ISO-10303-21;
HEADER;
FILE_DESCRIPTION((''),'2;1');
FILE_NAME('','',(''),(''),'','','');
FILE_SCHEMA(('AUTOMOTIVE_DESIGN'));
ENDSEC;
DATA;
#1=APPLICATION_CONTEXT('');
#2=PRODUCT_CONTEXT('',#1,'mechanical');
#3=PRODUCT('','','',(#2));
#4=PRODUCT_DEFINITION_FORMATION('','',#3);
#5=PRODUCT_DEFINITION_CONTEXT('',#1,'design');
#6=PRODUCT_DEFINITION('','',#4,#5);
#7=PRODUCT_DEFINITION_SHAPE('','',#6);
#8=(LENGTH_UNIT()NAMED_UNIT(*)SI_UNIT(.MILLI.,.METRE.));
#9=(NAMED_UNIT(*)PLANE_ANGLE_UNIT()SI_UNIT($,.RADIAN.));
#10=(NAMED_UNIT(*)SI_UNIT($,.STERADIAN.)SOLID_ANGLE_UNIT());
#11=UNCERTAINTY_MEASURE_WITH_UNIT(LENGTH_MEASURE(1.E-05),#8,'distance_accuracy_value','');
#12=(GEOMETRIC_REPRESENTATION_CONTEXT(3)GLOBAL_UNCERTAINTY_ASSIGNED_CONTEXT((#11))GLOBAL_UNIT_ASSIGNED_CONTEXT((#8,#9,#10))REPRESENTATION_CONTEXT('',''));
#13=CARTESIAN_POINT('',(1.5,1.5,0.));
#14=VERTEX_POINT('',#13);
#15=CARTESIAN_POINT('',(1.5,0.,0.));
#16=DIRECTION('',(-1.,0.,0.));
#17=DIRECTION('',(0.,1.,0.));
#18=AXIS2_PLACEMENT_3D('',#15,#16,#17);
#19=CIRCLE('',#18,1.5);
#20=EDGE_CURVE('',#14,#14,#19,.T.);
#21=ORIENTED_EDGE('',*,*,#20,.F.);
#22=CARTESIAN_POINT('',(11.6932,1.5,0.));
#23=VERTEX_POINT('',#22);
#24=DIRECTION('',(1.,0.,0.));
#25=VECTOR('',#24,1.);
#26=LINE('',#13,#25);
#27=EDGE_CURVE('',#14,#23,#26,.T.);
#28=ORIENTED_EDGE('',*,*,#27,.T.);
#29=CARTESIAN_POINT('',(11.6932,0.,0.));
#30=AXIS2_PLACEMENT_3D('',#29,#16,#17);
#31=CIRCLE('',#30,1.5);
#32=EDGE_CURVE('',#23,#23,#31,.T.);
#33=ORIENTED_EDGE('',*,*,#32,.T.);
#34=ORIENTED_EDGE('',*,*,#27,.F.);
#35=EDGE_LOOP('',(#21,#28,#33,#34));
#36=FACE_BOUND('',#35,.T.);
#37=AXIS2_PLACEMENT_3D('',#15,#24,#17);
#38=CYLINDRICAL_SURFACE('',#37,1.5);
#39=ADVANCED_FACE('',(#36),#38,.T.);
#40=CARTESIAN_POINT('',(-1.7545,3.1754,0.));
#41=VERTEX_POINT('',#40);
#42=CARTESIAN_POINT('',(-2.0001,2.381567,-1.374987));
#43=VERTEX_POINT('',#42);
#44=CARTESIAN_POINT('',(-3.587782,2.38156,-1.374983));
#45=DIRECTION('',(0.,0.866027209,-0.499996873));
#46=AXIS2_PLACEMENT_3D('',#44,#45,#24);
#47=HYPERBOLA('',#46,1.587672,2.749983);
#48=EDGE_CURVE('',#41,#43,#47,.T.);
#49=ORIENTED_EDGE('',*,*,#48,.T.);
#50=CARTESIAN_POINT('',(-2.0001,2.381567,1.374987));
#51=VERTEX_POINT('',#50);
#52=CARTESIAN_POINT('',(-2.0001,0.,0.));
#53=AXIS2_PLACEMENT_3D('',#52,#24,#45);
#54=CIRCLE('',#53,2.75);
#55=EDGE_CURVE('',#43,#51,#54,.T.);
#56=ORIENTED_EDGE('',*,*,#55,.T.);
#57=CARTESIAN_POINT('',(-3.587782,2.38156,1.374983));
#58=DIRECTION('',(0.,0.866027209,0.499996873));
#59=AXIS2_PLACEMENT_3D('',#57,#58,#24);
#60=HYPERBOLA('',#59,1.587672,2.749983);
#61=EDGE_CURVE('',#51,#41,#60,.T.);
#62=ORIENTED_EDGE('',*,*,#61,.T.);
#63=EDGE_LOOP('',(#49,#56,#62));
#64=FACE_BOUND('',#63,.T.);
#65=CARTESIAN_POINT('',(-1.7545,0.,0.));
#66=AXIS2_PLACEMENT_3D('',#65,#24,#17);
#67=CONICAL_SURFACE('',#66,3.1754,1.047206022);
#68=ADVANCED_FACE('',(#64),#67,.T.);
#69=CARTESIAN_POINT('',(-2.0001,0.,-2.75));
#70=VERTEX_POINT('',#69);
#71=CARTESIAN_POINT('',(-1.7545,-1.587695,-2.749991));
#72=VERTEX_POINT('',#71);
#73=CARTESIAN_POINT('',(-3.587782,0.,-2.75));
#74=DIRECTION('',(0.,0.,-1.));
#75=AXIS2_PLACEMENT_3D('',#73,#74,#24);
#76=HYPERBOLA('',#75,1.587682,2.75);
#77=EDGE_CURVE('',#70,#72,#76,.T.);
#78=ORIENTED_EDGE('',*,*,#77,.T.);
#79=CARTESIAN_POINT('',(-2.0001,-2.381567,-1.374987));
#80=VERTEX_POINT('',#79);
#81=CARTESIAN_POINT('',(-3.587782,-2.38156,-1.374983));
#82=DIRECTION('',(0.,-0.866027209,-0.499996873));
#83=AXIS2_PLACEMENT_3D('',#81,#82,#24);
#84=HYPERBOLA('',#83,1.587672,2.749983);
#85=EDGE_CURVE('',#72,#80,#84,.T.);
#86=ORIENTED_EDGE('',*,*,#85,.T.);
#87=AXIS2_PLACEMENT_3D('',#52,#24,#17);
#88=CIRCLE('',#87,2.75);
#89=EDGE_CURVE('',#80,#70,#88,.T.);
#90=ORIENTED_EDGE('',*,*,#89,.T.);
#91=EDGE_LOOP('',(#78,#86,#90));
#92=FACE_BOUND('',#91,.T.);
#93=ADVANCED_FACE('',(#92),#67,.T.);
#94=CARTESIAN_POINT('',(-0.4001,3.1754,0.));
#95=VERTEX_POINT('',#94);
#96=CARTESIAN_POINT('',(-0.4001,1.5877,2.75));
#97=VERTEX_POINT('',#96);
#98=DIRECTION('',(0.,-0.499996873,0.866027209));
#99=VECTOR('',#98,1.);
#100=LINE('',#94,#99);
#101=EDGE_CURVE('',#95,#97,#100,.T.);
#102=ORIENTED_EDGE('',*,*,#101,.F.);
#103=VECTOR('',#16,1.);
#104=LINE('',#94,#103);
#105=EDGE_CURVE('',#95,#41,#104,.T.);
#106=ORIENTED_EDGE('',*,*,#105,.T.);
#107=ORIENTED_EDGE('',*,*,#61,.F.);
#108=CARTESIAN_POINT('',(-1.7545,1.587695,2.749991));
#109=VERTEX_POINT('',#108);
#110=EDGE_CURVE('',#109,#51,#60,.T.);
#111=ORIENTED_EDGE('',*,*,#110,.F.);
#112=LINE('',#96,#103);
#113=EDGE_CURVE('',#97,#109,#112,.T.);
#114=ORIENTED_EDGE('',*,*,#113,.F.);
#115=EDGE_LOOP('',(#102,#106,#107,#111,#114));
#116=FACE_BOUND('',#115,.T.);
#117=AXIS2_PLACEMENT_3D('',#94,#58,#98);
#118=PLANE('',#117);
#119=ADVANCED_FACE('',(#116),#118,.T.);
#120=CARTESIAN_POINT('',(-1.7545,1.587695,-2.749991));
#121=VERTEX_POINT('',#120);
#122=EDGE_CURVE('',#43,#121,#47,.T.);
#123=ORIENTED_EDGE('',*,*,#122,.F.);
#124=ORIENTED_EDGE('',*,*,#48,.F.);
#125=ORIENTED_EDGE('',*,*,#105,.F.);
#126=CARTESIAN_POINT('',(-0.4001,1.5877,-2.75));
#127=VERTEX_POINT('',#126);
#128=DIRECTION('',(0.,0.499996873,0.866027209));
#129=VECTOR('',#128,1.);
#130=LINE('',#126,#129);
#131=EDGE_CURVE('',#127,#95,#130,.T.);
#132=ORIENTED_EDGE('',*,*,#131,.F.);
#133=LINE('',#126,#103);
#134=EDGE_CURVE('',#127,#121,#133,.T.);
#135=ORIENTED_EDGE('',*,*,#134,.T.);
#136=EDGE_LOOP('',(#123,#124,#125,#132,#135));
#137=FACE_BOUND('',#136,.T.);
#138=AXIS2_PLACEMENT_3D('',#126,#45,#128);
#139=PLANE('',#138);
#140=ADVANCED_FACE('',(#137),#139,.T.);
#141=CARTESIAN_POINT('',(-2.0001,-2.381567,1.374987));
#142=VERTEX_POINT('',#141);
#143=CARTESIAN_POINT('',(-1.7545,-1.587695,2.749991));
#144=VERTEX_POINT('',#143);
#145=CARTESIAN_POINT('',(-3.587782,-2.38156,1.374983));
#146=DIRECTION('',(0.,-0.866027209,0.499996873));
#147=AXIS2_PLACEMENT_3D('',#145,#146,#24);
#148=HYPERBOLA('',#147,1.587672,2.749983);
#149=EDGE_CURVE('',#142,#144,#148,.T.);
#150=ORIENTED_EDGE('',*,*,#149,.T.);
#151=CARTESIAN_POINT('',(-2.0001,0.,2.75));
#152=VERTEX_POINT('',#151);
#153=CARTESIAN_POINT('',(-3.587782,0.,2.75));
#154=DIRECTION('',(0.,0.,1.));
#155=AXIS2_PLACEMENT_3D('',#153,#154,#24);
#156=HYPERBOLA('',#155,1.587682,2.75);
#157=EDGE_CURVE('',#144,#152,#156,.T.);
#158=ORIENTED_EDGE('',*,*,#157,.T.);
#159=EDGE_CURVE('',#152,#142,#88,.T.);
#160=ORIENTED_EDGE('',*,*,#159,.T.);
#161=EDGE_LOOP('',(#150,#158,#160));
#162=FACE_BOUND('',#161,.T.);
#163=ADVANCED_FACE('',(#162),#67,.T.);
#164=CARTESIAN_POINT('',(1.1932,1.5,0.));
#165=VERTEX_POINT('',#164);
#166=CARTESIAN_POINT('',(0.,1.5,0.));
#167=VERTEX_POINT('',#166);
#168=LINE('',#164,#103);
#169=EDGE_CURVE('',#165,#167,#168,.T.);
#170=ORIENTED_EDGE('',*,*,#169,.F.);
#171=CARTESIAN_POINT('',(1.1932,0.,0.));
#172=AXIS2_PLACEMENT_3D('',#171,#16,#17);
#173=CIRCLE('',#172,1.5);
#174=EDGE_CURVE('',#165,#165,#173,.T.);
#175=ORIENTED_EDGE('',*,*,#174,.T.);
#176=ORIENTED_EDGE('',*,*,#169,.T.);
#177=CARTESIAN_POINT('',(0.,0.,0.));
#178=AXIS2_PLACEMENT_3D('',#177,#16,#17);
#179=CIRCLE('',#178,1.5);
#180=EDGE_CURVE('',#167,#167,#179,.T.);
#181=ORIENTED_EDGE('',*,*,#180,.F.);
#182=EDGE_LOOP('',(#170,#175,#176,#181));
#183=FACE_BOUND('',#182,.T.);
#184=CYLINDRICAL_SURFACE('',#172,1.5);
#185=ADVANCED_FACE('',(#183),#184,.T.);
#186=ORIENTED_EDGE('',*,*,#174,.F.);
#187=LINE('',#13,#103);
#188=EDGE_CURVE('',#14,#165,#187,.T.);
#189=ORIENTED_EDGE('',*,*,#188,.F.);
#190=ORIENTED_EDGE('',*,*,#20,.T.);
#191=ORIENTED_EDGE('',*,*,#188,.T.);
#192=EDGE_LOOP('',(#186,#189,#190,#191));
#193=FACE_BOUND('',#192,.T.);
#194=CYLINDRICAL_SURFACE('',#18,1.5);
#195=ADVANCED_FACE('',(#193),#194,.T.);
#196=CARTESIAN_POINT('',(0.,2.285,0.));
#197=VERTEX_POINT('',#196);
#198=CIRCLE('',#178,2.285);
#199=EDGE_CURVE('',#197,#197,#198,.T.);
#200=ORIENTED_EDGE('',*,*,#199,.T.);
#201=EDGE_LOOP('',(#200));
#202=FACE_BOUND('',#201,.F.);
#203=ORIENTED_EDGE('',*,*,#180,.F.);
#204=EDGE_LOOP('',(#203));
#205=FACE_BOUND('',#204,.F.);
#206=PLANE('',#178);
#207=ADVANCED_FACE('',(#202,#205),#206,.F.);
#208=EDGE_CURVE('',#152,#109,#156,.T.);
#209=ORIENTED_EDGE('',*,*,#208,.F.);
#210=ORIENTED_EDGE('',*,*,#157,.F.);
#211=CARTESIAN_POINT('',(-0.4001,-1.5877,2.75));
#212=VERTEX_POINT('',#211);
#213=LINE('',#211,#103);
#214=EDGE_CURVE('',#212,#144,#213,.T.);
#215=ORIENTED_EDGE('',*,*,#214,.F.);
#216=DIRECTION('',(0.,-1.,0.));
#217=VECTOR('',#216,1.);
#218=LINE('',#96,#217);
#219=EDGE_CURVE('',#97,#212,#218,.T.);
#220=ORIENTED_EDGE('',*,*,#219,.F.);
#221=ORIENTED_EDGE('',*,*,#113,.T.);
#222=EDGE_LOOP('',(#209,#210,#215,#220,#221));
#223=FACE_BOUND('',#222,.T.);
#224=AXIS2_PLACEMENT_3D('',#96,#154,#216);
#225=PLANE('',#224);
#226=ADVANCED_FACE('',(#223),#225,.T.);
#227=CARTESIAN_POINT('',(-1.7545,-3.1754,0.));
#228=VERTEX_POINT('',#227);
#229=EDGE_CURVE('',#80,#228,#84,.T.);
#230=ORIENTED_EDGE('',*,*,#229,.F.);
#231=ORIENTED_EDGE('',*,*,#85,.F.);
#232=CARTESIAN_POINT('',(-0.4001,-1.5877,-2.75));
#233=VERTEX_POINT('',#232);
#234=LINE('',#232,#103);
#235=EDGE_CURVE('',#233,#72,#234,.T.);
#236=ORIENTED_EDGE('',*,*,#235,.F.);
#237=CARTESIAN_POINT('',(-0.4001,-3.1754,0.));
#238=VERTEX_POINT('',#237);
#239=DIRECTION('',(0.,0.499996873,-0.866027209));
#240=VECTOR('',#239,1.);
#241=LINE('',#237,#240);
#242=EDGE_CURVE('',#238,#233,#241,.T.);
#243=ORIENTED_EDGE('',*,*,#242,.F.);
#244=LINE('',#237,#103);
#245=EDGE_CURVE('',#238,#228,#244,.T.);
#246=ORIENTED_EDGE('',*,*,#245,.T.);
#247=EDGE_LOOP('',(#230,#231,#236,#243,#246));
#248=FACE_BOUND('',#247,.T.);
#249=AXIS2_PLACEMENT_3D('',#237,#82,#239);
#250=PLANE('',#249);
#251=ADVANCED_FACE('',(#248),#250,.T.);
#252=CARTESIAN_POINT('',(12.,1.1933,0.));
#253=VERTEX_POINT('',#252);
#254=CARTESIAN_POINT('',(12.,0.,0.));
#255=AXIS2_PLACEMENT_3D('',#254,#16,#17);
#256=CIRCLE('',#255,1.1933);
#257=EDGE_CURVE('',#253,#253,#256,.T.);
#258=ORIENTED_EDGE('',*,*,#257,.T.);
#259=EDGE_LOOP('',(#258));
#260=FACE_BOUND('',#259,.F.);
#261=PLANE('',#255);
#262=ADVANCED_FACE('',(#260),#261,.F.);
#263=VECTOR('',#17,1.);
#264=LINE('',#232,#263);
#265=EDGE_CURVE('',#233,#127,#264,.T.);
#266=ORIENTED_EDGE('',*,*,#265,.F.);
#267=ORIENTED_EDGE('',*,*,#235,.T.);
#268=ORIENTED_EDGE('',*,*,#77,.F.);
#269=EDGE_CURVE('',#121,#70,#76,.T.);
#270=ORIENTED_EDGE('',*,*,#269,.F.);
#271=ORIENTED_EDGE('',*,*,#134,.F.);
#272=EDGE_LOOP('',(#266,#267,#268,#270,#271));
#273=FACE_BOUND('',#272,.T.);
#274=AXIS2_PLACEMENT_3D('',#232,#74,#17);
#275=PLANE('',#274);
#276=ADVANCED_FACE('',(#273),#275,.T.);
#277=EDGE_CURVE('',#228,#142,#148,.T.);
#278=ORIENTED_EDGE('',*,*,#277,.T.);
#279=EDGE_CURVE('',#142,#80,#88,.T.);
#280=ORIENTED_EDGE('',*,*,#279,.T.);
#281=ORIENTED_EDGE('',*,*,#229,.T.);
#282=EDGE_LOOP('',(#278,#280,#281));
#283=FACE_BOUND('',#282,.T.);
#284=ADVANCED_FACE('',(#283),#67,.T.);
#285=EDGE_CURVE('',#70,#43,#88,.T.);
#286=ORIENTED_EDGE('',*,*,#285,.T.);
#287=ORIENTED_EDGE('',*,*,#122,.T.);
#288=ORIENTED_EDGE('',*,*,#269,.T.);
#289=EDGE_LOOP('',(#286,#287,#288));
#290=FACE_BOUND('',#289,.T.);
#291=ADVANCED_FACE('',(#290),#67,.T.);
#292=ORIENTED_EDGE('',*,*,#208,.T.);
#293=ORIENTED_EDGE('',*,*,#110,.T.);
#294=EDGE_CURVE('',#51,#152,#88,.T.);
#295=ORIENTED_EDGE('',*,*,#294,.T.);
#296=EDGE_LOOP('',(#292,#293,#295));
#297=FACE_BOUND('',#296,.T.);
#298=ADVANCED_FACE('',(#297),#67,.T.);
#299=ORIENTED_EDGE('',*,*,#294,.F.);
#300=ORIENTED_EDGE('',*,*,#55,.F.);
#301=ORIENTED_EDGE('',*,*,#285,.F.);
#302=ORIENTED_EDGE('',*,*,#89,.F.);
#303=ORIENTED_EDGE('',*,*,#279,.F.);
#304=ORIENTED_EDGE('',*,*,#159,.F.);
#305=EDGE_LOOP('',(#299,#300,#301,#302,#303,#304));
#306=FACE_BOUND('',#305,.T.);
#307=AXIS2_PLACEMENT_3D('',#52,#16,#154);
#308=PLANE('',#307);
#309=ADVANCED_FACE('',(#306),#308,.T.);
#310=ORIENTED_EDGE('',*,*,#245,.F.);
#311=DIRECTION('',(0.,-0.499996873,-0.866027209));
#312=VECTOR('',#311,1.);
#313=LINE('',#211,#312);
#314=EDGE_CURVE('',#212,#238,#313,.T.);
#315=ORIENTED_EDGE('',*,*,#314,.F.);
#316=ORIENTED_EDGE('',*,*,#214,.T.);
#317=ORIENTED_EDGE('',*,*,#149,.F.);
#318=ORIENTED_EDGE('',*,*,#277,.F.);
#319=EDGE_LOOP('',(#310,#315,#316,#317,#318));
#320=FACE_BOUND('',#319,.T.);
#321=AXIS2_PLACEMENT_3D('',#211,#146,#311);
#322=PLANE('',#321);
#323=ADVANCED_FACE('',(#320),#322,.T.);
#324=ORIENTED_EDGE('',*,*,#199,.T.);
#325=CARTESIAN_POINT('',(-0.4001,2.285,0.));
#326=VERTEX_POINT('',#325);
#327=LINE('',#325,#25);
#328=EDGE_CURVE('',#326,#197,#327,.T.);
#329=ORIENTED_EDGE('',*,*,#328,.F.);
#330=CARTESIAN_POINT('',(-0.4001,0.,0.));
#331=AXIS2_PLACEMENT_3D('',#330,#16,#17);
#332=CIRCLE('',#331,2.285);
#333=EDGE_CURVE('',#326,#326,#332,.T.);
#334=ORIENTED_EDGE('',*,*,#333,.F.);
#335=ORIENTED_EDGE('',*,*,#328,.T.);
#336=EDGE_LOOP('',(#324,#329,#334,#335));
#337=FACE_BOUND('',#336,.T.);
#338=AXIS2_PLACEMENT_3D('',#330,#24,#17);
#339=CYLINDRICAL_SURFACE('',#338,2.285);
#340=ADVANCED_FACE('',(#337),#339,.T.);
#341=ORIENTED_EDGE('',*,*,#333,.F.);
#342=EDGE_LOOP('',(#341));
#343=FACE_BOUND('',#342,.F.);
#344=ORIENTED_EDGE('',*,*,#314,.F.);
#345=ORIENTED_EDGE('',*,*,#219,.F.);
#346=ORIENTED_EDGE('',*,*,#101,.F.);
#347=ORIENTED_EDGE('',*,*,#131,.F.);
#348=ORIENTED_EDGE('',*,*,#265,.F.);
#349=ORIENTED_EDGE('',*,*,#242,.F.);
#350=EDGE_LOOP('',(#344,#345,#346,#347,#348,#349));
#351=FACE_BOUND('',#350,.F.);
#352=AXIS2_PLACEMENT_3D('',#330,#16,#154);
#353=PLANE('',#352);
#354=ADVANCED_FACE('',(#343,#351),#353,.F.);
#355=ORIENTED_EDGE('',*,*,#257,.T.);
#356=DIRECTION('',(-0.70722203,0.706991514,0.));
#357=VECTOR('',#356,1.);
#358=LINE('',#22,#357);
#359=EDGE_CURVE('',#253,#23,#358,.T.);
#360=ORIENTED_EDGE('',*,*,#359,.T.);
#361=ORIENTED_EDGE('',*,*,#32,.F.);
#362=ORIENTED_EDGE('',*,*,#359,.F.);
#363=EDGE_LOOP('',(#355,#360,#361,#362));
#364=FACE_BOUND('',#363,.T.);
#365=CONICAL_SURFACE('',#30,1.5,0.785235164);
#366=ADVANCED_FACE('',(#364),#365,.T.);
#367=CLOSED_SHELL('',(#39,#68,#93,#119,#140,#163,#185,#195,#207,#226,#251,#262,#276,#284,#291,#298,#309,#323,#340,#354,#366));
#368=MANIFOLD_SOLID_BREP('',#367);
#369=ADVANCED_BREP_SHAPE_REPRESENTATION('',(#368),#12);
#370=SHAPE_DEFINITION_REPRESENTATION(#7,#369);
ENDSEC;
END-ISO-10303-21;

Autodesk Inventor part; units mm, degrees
ref_plane "YZ Plane" through (0, 0, 0) normal (1, 0, 0) x (0, 1, 0)
ref_plane "XZ Plane" through (0, 0, 0) normal (0, 1, 0) x (-1, 0, 0)
sketch "Skizze1" plane through (0, 0, 0) normal (0, 0, 1) x (1, 0, 0)
  line L0 (0, 2.285) -> (0, 1.5)
  line L1 (1.5, 1.5) -> (12, 1.5)
  line L2 (12, 1.5) -> (12, 0)
  line L3 (12, 0) -> (-0.4001, 0)
  line L4 (-2.8801, 0) -> (14.48, 0) projected
  line L5 (-0.4001, 0) -> (-0.4001, 2.285)
  line L6 (-0.4001, 2.285) -> (0, 2.285)
  line L7 (1.5, 1.5) -> (1.1932, 1.5)
  line L8 (1.1932, 1.5) -> (0, 1.5)
  line L9 (0, -0.457) -> (0, 2.742) projected
  dimension "d0" = 12
  dimension "d1" = 10.5
  dimension "d2" = 3
  dimension "d9" = 0.4001
  dimension "d10" = 4.57
  dimension "d13" = 0.3068
  dimension "d14" = 3
revolve "Körper" add sketch "Skizze1" angle 360 about axis through (12, 0, 0) along (-1, 0, 0)
sketch "Skizze2" plane through (-0.4001, 0, 0) normal (-1, 0, 0) x (0, 0, 1)
  line L0 (0, 3.1754) -> (2.75, 1.5877)
  line L1 (2.75, 1.5877) -> (2.75, -1.5877)
  line L2 (2.75, -1.5877) -> (0, -3.1754)
  line L3 (0, -3.1754) -> (-2.75, -1.5877)
  line L4 (-2.75, -1.5877) -> (-2.75, 1.5877)
  line L5 (-2.75, 1.5877) -> (0, 3.1754)
  point P0 (0, 0)
  point P1 (0, 0)
  dimension "d11" = 5.5
extrude "Kopf" add sketch "Skizze2" along normal blind 1.6
sketch "Skizze4" plane through (0, 0, 0) normal (0, 0, 1) x (1, 0, 0)
  line L0 (-2.0001, 2.75) -> (-2.0001, 3.1754)
  line L1 (-2.0001, 3.1754) -> (-1.7545, 3.1754)
  line L2 (-1.7545, 3.1754) -> (-2.0001, 2.75)
  line L3 (-2.3201, 0) -> (-0.0801, 0) projected
  line L4 (-0.4001, 3.1754) -> (-2.0001, 3.1754) projected
  line L5 (-2.0001, 1.5877) -> (-2.0001, 3.1754) projected
  dimension "d5" = 30
  dimension "d19" = 5.5
revolve "Fase1" cut sketch "Skizze4" angle 360 about axis through (-10, 0, 0) along (1, 0, 0)
thread "Gewinde" size "M3x0.5" class "6g" standard "ISO Metric profile" length 10.5
chamfer "Fase2" distance 0.3067 distance2 0.3068 1 edges at (12, -1.5, 0) measured on face at (12, 0.0871, -0.3876)
ref_plane "Work Plane1" through (1.525, 0, 0) normal (0, 0, 1) x (1, 0, 0)
equation "\"d0\" = NLG"
equation "\"d1\" = GEL"
equation "\"d2\" = GD"
equation "\"d10\" = SD2"
equation "\"d14\" = BDM"
equation "\"d11\" = SW"
equation "\"d3\" = KOH - SD"
equation "\"d5\" = ANG1"
equation "\"d19\" = SW0"
equation "\"d15\" = GEL"
equation "\"d6\" = -0.5 * SPD + 0.5 * GD"
equation "\"NLG\" = 12"
equation "\"GD\" = NND"
equation "\"BDM\" = NND"
equation "\"KOH\" = 2"
equation "\"GEL\" = 10.5"
equation "\"SW\" = 5.5"
equation "\"SW0\" = SW"
equation "\"SPD\" = NND - 1.2269 * PTC"
equation "\"SD2\" = 4.57"
equation "\"SD\" = 0.4"
equation "\"ANG1\" = 30deg"
equation "\"GAL\" = 0.61345 * PTC"
equation "\"GUL\" = 0.61345 * PTC"
equation "\"RR\" = 0.1"
equation "\"GD1\" = THREADDIA - 1.2269 * PTC"
equation "\"THREADDIA\" = 3"
equation "\"SDH\" = SD2"
equation "\"SDHG\" = 1.5"
equation "\"TOA\" = 30deg"
equation "\"PTC\" = 0.5"
equation "\"NND\" = 3"
equation "\"E0\" = 6.3525"
properties part number "ISO 4017 - M3 x 12" material "Edelstahl, 440C"
